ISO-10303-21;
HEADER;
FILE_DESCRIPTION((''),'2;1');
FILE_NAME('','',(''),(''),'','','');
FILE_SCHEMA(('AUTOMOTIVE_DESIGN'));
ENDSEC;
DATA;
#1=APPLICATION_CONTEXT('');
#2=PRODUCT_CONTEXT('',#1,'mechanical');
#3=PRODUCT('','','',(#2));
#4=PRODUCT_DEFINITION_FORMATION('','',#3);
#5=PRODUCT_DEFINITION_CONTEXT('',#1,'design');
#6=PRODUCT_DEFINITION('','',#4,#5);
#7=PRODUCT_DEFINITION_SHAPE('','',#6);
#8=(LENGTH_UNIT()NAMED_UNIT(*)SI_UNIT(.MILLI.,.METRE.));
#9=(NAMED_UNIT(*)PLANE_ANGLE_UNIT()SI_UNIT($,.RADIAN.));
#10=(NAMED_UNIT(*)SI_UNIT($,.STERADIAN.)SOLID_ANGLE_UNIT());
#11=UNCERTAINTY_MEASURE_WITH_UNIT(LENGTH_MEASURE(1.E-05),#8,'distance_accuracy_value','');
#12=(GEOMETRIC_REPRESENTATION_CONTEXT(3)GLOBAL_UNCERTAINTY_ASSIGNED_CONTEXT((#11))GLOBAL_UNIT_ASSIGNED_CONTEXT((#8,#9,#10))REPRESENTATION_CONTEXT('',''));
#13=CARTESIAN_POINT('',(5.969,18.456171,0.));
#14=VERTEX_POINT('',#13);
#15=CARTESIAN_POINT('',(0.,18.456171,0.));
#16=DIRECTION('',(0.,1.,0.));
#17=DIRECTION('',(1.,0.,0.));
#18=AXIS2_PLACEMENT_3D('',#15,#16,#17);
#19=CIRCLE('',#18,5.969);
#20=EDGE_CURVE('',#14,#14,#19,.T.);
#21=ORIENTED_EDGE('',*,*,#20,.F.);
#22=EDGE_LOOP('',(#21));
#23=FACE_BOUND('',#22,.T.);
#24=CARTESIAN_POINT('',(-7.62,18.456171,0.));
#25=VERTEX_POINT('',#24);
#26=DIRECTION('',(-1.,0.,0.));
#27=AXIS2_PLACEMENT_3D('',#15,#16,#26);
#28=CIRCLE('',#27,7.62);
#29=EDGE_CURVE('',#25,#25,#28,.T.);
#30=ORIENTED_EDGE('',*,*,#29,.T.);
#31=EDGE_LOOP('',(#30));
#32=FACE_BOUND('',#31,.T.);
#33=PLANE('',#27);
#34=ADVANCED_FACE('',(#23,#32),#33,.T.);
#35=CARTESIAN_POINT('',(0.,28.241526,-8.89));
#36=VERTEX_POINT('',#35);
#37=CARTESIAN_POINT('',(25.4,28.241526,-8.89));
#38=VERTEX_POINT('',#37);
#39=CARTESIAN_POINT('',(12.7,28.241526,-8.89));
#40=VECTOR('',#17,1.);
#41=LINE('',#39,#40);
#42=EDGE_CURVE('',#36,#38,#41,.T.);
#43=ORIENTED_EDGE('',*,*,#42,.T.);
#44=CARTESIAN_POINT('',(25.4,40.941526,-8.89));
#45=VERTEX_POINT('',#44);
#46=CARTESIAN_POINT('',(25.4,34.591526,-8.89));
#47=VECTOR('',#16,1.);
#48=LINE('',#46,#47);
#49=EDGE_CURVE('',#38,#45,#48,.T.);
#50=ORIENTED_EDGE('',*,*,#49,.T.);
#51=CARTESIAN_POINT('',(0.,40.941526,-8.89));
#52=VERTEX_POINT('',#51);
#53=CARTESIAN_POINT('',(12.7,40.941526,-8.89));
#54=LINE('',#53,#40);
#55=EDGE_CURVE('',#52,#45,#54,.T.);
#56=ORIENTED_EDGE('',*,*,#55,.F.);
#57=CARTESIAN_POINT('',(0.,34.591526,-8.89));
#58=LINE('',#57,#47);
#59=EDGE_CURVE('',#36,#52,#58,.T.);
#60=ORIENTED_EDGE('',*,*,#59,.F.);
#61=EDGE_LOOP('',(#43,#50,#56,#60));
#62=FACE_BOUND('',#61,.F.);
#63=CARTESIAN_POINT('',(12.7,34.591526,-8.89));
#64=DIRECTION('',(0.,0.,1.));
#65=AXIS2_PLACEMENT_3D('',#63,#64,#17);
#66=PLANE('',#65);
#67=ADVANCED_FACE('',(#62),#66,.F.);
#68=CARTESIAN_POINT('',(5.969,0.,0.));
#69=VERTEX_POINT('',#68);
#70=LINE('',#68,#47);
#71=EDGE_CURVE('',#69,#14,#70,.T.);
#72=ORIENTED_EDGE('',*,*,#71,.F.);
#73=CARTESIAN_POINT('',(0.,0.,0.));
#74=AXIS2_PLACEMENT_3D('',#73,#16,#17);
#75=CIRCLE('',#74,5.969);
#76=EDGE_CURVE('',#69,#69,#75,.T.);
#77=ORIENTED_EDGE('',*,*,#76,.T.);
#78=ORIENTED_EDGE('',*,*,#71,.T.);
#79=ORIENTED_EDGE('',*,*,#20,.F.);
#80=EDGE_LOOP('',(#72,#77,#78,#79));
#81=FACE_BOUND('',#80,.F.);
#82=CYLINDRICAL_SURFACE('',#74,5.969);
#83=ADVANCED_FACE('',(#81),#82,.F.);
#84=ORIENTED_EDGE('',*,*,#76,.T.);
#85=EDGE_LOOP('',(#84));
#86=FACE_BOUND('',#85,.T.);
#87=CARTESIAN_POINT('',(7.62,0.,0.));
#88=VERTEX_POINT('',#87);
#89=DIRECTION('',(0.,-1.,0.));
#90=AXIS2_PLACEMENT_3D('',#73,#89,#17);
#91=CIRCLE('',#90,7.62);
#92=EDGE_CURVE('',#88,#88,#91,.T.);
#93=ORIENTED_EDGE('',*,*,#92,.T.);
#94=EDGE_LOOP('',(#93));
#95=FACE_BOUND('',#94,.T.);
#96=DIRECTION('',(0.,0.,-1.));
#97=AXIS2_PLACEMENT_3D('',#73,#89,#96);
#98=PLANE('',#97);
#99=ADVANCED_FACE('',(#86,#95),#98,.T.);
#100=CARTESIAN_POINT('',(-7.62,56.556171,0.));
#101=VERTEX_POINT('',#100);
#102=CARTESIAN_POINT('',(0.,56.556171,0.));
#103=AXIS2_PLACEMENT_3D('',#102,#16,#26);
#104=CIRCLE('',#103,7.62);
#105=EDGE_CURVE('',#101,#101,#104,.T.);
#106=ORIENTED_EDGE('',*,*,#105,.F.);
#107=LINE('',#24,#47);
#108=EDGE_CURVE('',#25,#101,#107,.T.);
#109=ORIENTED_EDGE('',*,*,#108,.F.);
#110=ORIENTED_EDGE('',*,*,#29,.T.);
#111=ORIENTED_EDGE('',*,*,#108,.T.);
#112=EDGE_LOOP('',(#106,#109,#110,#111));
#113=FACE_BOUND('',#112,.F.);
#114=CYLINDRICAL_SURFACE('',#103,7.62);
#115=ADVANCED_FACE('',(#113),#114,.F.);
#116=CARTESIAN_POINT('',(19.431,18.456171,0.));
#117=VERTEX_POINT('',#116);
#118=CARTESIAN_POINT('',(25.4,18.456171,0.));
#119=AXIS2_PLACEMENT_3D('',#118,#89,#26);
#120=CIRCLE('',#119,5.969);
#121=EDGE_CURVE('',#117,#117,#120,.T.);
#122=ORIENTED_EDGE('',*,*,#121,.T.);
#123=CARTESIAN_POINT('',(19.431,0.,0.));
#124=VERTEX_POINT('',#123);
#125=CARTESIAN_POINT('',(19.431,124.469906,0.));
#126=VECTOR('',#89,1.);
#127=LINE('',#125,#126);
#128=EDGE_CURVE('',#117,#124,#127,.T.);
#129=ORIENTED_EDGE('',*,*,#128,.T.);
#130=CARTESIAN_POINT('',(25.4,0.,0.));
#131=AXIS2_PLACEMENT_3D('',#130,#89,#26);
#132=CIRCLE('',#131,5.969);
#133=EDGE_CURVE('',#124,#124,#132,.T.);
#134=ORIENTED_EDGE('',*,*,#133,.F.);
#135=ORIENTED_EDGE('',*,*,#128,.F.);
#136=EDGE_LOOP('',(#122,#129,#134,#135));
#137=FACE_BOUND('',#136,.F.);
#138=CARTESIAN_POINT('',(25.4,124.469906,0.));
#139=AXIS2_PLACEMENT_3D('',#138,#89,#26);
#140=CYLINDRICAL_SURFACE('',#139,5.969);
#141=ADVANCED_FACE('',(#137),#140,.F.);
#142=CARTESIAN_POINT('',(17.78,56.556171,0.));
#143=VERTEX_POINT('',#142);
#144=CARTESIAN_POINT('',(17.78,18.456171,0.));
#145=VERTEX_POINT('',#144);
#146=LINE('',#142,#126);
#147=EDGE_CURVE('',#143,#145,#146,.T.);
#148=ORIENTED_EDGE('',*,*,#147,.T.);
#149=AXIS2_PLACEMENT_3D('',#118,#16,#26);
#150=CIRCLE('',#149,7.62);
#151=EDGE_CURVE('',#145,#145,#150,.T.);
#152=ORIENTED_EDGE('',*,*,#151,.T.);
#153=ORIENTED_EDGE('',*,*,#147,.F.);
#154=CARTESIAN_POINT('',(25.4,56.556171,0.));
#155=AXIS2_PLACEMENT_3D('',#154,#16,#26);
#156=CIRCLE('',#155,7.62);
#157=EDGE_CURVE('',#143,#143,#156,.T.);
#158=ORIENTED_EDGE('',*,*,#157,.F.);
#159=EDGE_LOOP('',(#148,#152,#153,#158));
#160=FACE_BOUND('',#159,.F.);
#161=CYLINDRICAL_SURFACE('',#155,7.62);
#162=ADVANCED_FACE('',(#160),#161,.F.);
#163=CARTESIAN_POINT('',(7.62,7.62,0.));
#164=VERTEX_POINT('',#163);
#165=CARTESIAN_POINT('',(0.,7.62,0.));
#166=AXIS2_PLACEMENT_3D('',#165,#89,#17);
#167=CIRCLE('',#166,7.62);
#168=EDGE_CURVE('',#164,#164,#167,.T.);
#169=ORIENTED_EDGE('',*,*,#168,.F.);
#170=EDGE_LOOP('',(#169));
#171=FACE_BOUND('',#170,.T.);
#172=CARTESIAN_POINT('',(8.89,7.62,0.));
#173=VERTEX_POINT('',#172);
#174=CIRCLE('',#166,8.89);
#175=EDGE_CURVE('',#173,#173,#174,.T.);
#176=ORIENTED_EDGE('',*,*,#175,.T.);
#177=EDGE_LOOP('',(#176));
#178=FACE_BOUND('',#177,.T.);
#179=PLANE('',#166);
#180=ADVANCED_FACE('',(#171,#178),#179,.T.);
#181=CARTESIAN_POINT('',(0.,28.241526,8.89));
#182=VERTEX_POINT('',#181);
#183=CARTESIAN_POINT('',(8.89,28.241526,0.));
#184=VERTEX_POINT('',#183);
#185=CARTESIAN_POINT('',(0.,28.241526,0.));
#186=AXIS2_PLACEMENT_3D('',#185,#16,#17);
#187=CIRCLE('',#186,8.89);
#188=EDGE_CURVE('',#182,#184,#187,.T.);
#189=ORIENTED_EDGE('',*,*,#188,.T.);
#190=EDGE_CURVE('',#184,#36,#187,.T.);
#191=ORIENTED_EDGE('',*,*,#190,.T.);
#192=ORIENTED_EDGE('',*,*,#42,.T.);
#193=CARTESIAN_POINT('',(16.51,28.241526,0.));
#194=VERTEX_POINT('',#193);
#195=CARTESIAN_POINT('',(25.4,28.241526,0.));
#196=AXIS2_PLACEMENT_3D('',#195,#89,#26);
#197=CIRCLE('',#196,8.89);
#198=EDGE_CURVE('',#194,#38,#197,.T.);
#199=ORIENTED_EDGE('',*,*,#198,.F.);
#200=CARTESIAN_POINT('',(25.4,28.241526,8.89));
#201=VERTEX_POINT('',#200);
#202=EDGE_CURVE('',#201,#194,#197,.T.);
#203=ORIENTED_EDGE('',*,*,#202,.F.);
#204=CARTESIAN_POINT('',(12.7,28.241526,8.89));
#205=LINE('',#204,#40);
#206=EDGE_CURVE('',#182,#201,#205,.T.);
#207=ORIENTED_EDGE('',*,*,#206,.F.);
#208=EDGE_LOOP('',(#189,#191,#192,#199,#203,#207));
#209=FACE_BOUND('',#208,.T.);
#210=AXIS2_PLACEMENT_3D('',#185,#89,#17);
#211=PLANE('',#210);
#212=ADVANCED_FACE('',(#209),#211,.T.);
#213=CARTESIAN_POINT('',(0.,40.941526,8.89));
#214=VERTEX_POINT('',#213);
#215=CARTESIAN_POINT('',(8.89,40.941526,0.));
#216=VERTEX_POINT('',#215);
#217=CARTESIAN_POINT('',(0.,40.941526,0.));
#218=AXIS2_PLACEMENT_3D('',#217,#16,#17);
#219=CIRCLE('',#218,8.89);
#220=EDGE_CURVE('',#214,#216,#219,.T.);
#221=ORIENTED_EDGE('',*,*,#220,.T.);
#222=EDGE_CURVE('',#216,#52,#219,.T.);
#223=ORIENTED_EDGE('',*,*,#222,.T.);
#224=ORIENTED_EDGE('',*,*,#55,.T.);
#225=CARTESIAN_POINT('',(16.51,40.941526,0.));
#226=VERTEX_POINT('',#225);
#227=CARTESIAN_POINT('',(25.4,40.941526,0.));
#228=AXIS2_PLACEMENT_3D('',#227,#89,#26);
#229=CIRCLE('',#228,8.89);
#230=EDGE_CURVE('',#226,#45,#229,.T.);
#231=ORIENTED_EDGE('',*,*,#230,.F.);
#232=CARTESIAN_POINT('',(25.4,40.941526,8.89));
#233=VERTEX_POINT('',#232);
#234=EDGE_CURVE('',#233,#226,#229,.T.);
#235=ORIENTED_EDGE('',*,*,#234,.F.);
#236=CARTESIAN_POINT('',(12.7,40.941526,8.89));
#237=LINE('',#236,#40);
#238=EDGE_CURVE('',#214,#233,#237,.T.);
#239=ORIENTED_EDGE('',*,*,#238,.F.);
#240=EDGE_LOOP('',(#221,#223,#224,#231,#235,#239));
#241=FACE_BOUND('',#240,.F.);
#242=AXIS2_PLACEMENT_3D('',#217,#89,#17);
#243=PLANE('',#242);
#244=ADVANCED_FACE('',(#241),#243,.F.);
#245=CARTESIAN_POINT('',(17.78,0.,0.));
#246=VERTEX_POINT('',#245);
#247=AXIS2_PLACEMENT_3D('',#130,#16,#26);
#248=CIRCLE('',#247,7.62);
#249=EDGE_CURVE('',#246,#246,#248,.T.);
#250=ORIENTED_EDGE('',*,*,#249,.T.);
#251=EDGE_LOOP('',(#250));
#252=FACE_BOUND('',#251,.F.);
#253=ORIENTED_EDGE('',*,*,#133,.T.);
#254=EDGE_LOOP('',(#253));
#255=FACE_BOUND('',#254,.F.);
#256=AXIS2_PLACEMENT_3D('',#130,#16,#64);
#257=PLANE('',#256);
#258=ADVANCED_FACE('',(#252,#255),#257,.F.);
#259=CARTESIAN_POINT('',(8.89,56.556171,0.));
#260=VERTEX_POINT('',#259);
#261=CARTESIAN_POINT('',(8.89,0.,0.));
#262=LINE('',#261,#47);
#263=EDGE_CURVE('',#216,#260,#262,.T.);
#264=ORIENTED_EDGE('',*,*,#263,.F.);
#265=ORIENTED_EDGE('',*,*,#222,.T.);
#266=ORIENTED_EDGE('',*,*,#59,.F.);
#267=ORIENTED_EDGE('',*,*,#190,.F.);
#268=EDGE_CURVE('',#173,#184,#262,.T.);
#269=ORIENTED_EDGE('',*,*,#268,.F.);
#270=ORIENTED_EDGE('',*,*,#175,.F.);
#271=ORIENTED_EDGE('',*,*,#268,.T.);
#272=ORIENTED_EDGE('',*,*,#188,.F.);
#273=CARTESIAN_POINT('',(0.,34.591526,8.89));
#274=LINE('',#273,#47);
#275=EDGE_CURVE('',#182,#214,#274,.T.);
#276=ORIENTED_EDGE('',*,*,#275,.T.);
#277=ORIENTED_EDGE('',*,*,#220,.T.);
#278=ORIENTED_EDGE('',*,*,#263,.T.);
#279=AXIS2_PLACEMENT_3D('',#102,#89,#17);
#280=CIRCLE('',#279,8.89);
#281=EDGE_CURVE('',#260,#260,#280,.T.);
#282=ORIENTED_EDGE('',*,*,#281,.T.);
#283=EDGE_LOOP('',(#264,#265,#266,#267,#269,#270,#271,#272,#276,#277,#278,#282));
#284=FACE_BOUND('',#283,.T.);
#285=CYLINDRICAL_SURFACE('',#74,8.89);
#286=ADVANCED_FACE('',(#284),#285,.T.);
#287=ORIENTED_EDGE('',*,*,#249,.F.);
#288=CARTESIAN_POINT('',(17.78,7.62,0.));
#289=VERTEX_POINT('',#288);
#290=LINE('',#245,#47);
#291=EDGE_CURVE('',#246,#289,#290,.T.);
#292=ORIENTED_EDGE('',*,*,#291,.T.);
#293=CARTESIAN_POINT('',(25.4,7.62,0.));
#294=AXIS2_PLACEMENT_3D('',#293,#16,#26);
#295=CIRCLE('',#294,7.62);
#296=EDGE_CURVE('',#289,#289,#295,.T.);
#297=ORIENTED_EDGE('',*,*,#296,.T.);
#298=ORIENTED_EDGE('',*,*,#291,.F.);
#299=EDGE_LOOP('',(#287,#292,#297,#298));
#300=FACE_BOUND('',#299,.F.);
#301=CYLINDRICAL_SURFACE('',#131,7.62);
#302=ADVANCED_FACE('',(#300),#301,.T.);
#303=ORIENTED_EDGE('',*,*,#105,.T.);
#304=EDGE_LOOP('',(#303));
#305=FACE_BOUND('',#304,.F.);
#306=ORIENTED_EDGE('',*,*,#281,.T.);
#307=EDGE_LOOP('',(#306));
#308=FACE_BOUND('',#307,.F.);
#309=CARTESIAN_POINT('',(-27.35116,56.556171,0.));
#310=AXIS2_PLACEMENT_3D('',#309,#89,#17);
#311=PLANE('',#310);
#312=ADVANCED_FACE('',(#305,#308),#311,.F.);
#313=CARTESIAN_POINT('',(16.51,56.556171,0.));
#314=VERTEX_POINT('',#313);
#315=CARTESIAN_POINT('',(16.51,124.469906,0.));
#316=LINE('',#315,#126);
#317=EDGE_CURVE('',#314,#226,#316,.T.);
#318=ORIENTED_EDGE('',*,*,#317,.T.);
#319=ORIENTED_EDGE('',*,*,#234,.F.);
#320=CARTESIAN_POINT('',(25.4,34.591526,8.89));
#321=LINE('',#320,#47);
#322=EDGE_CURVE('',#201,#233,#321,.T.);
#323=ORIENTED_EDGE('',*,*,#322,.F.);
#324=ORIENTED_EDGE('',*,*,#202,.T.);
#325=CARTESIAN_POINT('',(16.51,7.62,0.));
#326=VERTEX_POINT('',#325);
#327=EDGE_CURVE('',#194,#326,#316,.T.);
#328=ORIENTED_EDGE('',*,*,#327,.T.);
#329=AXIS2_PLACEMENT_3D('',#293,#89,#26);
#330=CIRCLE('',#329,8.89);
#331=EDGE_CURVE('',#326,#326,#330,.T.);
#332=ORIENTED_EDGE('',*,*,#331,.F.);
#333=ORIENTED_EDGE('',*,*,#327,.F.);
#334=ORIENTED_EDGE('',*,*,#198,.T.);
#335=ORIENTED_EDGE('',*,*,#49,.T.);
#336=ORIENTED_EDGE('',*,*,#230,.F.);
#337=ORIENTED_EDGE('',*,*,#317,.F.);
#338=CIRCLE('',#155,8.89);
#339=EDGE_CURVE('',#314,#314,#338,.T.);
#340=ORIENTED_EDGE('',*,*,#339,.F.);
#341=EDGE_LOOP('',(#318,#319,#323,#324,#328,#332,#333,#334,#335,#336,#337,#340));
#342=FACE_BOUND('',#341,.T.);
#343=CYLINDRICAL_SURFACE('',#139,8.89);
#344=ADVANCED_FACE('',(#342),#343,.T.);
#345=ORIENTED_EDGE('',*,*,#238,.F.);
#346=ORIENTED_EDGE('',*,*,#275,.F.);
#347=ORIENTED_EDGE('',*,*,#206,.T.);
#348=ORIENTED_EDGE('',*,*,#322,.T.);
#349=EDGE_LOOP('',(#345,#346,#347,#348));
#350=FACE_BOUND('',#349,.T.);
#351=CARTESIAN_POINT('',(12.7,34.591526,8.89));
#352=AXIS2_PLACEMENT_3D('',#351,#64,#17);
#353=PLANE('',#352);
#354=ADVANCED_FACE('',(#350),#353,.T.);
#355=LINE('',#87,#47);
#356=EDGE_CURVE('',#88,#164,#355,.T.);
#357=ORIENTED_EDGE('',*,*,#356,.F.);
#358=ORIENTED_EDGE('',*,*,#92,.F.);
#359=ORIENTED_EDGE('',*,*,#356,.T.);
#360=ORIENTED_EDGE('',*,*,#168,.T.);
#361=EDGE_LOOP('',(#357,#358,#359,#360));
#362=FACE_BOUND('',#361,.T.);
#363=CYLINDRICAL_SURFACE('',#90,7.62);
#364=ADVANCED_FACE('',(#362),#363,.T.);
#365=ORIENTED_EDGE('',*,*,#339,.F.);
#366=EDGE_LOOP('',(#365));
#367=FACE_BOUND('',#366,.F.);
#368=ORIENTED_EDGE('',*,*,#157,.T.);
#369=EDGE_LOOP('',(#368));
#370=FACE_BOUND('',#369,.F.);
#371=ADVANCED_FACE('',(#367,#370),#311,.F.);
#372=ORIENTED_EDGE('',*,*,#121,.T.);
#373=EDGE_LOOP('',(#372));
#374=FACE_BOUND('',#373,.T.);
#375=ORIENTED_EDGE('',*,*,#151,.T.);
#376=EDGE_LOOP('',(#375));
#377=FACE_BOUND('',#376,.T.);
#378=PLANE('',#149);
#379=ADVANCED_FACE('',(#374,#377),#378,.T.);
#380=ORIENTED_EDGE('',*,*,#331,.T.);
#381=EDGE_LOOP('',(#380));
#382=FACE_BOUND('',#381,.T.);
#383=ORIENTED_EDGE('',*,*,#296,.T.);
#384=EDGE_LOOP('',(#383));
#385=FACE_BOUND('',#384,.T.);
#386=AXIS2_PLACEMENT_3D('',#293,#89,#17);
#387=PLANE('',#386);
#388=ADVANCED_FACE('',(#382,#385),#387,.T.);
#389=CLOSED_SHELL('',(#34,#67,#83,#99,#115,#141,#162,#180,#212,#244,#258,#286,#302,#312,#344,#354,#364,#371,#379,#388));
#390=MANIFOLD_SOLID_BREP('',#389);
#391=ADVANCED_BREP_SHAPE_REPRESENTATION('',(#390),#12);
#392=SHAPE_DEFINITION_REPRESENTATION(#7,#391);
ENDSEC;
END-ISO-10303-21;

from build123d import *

# Parameters (mm, degrees)
F1_R          = 8.89
F1_R_2        = 5.969
F3_R          = 8.89
F3_R_2        = 7.62
F4_DEPTH      = 7.62
F5_DEPTH      = 25.4
F5_DEPTH_BACK = 25.4
F6_R          = 7.62
F7_R          = 7.62
F8_DEPTH      = 38.1
F0_W          = 25.4
F0_H          = 12.7
F9_DEPTH      = 8.89
F9_DEPTH_BACK = 8.89
F10_DEPTH     = 25.4
F11_DEPTH     = 38.1


with BuildPart() as f2:
    # F2: sweep along a path in F0
    with BuildLine(Plane.XY) as f2_path:
        Line((0, 0), (0, 124.469906))
        ThreePointArc((0, 124.469906), (12.7, 137.169906), (25.4, 124.469906))
        Line((25.4, 124.469906), (25.4, 0))
    # F1 (on Front) → F2 (sweep)
    with BuildSketch(Plane.XZ):
        Circle(F1_R)
        Circle(F1_R_2, mode=Mode.SUBTRACT)
    sweep(path=f2_path.line)

    # F3 (on face) → F4 (cut)
    with BuildSketch(Plane.XZ):
        Circle(F3_R)
        Circle(F3_R_2, mode=Mode.SUBTRACT)
        with BuildLine():
            ThreePointArc((34.29, 0), (25.4, 8.89), (16.51, 0))
            ThreePointArc((16.51, 0), (25.4, -8.89), (34.29, 0))
        make_face()
        with BuildLine():
            ThreePointArc((33.02, 0), (25.4, -7.62), (17.78, 0))
            ThreePointArc((17.78, 0), (25.4, 7.62), (33.02, 0))
        make_face(mode=Mode.SUBTRACT)
    extrude(amount=-F4_DEPTH, mode=Mode.SUBTRACT)

    # F0 (on Top) → F5 (cut, two sides)
    with BuildSketch(Plane.XY) as f5_sk:
        with BuildLine():
            Line((-27.3511596024, 56.5561708785), (0, 56.5561708785))
            Line((0, 56.5561708785), (0, 124.469906))
            ThreePointArc((0, 124.469906), (3.7197438789, 133.4501621211), (12.7, 137.169906))
            ThreePointArc((12.7, 137.169906), (21.6802561211, 133.4501621211), (25.4, 124.469906))
            Line((25.4, 124.469906), (25.4, 56.5561708785))
            Line((25.4, 56.5561708785), (45.1116599143, 56.5561708785))
            Line((45.1116599143, 56.5561708785), (45.1116599143, 146.6434597969))
            Line((45.1116599143, 146.6434597969), (-27.3511596024, 146.6434597969))
            Line((-27.3511596024, 146.6434597969), (-27.3511596024, 56.5561708785))
        make_face()
        with BuildLine():
            Line((0, 124.469906), (0, 56.5561708785))
            Line((0, 56.5561708785), (12.7, 56.5561708785))
            Line((12.7, 56.5561708785), (12.7, 137.169906))
            ThreePointArc((12.7, 137.169906), (3.7197438789, 133.4501621211), (0, 124.469906))
        make_face()
        with BuildLine():
            Line((12.7, 56.5561708785), (25.4, 56.5561708785))
            Line((25.4, 56.5561708785), (25.4, 124.469906))
            ThreePointArc((25.4, 124.469906), (21.6802561211, 133.4501621211), (12.7, 137.169906))
            Line((12.7, 137.169906), (12.7, 56.5561708785))
        make_face()
    extrude(amount=-F5_DEPTH, mode=Mode.SUBTRACT)
    extrude(f5_sk.sketch, amount=F5_DEPTH_BACK, mode=Mode.SUBTRACT)

    # F6 (on face) + F7 (on face) → F8 (cut)
    with BuildSketch(Plane(origin=(0, 56.5561708785, 0), x_dir=(-1, 0, 0), z_dir=(0, 1, 0))):
        with Locations((-25.4, 0)):
            Circle(F6_R)
    with BuildSketch(Plane(origin=(0, 56.5561708785, 0), x_dir=(-1, 0, 0), z_dir=(0, 1, 0))):
        Circle(F7_R)
    extrude(amount=-F8_DEPTH, mode=Mode.SUBTRACT)

    # F0 (on Top) → F9 (join, two sides)
    with BuildSketch(Plane.XY) as f9_sk:
        with Locations((12.7, 34.5915263355)):
            Rectangle(F0_W, F0_H)
    extrude(amount=F9_DEPTH)
    extrude(f9_sk.sketch, amount=-F9_DEPTH_BACK)

    # F7 (on face) + F6 (on face) → F10 (cut)
    with BuildSketch(Plane(origin=(0, 56.5561708785, 0), x_dir=(-1, 0, 0), z_dir=(0, 1, 0))):
        Circle(F7_R)
    with BuildSketch(Plane(origin=(0, 56.5561708785, 0), x_dir=(-1, 0, 0), z_dir=(0, 1, 0))):
        with Locations((-25.4, 0)):
            Circle(F6_R)
    extrude(amount=-F10_DEPTH, mode=Mode.SUBTRACT)

    # F7 (on face) + F6 (on face) → F11 (cut)
    with BuildSketch(Plane(origin=(0, 56.5561708785, 0), x_dir=(-1, 0, 0), z_dir=(0, 1, 0))):
        Circle(F7_R)
    with BuildSketch(Plane(origin=(0, 56.5561708785, 0), x_dir=(-1, 0, 0), z_dir=(0, 1, 0))):
        with Locations((-25.4, 0)):
            Circle(F6_R)
    extrude(amount=-F11_DEPTH, mode=Mode.SUBTRACT)


solid = f2.part
